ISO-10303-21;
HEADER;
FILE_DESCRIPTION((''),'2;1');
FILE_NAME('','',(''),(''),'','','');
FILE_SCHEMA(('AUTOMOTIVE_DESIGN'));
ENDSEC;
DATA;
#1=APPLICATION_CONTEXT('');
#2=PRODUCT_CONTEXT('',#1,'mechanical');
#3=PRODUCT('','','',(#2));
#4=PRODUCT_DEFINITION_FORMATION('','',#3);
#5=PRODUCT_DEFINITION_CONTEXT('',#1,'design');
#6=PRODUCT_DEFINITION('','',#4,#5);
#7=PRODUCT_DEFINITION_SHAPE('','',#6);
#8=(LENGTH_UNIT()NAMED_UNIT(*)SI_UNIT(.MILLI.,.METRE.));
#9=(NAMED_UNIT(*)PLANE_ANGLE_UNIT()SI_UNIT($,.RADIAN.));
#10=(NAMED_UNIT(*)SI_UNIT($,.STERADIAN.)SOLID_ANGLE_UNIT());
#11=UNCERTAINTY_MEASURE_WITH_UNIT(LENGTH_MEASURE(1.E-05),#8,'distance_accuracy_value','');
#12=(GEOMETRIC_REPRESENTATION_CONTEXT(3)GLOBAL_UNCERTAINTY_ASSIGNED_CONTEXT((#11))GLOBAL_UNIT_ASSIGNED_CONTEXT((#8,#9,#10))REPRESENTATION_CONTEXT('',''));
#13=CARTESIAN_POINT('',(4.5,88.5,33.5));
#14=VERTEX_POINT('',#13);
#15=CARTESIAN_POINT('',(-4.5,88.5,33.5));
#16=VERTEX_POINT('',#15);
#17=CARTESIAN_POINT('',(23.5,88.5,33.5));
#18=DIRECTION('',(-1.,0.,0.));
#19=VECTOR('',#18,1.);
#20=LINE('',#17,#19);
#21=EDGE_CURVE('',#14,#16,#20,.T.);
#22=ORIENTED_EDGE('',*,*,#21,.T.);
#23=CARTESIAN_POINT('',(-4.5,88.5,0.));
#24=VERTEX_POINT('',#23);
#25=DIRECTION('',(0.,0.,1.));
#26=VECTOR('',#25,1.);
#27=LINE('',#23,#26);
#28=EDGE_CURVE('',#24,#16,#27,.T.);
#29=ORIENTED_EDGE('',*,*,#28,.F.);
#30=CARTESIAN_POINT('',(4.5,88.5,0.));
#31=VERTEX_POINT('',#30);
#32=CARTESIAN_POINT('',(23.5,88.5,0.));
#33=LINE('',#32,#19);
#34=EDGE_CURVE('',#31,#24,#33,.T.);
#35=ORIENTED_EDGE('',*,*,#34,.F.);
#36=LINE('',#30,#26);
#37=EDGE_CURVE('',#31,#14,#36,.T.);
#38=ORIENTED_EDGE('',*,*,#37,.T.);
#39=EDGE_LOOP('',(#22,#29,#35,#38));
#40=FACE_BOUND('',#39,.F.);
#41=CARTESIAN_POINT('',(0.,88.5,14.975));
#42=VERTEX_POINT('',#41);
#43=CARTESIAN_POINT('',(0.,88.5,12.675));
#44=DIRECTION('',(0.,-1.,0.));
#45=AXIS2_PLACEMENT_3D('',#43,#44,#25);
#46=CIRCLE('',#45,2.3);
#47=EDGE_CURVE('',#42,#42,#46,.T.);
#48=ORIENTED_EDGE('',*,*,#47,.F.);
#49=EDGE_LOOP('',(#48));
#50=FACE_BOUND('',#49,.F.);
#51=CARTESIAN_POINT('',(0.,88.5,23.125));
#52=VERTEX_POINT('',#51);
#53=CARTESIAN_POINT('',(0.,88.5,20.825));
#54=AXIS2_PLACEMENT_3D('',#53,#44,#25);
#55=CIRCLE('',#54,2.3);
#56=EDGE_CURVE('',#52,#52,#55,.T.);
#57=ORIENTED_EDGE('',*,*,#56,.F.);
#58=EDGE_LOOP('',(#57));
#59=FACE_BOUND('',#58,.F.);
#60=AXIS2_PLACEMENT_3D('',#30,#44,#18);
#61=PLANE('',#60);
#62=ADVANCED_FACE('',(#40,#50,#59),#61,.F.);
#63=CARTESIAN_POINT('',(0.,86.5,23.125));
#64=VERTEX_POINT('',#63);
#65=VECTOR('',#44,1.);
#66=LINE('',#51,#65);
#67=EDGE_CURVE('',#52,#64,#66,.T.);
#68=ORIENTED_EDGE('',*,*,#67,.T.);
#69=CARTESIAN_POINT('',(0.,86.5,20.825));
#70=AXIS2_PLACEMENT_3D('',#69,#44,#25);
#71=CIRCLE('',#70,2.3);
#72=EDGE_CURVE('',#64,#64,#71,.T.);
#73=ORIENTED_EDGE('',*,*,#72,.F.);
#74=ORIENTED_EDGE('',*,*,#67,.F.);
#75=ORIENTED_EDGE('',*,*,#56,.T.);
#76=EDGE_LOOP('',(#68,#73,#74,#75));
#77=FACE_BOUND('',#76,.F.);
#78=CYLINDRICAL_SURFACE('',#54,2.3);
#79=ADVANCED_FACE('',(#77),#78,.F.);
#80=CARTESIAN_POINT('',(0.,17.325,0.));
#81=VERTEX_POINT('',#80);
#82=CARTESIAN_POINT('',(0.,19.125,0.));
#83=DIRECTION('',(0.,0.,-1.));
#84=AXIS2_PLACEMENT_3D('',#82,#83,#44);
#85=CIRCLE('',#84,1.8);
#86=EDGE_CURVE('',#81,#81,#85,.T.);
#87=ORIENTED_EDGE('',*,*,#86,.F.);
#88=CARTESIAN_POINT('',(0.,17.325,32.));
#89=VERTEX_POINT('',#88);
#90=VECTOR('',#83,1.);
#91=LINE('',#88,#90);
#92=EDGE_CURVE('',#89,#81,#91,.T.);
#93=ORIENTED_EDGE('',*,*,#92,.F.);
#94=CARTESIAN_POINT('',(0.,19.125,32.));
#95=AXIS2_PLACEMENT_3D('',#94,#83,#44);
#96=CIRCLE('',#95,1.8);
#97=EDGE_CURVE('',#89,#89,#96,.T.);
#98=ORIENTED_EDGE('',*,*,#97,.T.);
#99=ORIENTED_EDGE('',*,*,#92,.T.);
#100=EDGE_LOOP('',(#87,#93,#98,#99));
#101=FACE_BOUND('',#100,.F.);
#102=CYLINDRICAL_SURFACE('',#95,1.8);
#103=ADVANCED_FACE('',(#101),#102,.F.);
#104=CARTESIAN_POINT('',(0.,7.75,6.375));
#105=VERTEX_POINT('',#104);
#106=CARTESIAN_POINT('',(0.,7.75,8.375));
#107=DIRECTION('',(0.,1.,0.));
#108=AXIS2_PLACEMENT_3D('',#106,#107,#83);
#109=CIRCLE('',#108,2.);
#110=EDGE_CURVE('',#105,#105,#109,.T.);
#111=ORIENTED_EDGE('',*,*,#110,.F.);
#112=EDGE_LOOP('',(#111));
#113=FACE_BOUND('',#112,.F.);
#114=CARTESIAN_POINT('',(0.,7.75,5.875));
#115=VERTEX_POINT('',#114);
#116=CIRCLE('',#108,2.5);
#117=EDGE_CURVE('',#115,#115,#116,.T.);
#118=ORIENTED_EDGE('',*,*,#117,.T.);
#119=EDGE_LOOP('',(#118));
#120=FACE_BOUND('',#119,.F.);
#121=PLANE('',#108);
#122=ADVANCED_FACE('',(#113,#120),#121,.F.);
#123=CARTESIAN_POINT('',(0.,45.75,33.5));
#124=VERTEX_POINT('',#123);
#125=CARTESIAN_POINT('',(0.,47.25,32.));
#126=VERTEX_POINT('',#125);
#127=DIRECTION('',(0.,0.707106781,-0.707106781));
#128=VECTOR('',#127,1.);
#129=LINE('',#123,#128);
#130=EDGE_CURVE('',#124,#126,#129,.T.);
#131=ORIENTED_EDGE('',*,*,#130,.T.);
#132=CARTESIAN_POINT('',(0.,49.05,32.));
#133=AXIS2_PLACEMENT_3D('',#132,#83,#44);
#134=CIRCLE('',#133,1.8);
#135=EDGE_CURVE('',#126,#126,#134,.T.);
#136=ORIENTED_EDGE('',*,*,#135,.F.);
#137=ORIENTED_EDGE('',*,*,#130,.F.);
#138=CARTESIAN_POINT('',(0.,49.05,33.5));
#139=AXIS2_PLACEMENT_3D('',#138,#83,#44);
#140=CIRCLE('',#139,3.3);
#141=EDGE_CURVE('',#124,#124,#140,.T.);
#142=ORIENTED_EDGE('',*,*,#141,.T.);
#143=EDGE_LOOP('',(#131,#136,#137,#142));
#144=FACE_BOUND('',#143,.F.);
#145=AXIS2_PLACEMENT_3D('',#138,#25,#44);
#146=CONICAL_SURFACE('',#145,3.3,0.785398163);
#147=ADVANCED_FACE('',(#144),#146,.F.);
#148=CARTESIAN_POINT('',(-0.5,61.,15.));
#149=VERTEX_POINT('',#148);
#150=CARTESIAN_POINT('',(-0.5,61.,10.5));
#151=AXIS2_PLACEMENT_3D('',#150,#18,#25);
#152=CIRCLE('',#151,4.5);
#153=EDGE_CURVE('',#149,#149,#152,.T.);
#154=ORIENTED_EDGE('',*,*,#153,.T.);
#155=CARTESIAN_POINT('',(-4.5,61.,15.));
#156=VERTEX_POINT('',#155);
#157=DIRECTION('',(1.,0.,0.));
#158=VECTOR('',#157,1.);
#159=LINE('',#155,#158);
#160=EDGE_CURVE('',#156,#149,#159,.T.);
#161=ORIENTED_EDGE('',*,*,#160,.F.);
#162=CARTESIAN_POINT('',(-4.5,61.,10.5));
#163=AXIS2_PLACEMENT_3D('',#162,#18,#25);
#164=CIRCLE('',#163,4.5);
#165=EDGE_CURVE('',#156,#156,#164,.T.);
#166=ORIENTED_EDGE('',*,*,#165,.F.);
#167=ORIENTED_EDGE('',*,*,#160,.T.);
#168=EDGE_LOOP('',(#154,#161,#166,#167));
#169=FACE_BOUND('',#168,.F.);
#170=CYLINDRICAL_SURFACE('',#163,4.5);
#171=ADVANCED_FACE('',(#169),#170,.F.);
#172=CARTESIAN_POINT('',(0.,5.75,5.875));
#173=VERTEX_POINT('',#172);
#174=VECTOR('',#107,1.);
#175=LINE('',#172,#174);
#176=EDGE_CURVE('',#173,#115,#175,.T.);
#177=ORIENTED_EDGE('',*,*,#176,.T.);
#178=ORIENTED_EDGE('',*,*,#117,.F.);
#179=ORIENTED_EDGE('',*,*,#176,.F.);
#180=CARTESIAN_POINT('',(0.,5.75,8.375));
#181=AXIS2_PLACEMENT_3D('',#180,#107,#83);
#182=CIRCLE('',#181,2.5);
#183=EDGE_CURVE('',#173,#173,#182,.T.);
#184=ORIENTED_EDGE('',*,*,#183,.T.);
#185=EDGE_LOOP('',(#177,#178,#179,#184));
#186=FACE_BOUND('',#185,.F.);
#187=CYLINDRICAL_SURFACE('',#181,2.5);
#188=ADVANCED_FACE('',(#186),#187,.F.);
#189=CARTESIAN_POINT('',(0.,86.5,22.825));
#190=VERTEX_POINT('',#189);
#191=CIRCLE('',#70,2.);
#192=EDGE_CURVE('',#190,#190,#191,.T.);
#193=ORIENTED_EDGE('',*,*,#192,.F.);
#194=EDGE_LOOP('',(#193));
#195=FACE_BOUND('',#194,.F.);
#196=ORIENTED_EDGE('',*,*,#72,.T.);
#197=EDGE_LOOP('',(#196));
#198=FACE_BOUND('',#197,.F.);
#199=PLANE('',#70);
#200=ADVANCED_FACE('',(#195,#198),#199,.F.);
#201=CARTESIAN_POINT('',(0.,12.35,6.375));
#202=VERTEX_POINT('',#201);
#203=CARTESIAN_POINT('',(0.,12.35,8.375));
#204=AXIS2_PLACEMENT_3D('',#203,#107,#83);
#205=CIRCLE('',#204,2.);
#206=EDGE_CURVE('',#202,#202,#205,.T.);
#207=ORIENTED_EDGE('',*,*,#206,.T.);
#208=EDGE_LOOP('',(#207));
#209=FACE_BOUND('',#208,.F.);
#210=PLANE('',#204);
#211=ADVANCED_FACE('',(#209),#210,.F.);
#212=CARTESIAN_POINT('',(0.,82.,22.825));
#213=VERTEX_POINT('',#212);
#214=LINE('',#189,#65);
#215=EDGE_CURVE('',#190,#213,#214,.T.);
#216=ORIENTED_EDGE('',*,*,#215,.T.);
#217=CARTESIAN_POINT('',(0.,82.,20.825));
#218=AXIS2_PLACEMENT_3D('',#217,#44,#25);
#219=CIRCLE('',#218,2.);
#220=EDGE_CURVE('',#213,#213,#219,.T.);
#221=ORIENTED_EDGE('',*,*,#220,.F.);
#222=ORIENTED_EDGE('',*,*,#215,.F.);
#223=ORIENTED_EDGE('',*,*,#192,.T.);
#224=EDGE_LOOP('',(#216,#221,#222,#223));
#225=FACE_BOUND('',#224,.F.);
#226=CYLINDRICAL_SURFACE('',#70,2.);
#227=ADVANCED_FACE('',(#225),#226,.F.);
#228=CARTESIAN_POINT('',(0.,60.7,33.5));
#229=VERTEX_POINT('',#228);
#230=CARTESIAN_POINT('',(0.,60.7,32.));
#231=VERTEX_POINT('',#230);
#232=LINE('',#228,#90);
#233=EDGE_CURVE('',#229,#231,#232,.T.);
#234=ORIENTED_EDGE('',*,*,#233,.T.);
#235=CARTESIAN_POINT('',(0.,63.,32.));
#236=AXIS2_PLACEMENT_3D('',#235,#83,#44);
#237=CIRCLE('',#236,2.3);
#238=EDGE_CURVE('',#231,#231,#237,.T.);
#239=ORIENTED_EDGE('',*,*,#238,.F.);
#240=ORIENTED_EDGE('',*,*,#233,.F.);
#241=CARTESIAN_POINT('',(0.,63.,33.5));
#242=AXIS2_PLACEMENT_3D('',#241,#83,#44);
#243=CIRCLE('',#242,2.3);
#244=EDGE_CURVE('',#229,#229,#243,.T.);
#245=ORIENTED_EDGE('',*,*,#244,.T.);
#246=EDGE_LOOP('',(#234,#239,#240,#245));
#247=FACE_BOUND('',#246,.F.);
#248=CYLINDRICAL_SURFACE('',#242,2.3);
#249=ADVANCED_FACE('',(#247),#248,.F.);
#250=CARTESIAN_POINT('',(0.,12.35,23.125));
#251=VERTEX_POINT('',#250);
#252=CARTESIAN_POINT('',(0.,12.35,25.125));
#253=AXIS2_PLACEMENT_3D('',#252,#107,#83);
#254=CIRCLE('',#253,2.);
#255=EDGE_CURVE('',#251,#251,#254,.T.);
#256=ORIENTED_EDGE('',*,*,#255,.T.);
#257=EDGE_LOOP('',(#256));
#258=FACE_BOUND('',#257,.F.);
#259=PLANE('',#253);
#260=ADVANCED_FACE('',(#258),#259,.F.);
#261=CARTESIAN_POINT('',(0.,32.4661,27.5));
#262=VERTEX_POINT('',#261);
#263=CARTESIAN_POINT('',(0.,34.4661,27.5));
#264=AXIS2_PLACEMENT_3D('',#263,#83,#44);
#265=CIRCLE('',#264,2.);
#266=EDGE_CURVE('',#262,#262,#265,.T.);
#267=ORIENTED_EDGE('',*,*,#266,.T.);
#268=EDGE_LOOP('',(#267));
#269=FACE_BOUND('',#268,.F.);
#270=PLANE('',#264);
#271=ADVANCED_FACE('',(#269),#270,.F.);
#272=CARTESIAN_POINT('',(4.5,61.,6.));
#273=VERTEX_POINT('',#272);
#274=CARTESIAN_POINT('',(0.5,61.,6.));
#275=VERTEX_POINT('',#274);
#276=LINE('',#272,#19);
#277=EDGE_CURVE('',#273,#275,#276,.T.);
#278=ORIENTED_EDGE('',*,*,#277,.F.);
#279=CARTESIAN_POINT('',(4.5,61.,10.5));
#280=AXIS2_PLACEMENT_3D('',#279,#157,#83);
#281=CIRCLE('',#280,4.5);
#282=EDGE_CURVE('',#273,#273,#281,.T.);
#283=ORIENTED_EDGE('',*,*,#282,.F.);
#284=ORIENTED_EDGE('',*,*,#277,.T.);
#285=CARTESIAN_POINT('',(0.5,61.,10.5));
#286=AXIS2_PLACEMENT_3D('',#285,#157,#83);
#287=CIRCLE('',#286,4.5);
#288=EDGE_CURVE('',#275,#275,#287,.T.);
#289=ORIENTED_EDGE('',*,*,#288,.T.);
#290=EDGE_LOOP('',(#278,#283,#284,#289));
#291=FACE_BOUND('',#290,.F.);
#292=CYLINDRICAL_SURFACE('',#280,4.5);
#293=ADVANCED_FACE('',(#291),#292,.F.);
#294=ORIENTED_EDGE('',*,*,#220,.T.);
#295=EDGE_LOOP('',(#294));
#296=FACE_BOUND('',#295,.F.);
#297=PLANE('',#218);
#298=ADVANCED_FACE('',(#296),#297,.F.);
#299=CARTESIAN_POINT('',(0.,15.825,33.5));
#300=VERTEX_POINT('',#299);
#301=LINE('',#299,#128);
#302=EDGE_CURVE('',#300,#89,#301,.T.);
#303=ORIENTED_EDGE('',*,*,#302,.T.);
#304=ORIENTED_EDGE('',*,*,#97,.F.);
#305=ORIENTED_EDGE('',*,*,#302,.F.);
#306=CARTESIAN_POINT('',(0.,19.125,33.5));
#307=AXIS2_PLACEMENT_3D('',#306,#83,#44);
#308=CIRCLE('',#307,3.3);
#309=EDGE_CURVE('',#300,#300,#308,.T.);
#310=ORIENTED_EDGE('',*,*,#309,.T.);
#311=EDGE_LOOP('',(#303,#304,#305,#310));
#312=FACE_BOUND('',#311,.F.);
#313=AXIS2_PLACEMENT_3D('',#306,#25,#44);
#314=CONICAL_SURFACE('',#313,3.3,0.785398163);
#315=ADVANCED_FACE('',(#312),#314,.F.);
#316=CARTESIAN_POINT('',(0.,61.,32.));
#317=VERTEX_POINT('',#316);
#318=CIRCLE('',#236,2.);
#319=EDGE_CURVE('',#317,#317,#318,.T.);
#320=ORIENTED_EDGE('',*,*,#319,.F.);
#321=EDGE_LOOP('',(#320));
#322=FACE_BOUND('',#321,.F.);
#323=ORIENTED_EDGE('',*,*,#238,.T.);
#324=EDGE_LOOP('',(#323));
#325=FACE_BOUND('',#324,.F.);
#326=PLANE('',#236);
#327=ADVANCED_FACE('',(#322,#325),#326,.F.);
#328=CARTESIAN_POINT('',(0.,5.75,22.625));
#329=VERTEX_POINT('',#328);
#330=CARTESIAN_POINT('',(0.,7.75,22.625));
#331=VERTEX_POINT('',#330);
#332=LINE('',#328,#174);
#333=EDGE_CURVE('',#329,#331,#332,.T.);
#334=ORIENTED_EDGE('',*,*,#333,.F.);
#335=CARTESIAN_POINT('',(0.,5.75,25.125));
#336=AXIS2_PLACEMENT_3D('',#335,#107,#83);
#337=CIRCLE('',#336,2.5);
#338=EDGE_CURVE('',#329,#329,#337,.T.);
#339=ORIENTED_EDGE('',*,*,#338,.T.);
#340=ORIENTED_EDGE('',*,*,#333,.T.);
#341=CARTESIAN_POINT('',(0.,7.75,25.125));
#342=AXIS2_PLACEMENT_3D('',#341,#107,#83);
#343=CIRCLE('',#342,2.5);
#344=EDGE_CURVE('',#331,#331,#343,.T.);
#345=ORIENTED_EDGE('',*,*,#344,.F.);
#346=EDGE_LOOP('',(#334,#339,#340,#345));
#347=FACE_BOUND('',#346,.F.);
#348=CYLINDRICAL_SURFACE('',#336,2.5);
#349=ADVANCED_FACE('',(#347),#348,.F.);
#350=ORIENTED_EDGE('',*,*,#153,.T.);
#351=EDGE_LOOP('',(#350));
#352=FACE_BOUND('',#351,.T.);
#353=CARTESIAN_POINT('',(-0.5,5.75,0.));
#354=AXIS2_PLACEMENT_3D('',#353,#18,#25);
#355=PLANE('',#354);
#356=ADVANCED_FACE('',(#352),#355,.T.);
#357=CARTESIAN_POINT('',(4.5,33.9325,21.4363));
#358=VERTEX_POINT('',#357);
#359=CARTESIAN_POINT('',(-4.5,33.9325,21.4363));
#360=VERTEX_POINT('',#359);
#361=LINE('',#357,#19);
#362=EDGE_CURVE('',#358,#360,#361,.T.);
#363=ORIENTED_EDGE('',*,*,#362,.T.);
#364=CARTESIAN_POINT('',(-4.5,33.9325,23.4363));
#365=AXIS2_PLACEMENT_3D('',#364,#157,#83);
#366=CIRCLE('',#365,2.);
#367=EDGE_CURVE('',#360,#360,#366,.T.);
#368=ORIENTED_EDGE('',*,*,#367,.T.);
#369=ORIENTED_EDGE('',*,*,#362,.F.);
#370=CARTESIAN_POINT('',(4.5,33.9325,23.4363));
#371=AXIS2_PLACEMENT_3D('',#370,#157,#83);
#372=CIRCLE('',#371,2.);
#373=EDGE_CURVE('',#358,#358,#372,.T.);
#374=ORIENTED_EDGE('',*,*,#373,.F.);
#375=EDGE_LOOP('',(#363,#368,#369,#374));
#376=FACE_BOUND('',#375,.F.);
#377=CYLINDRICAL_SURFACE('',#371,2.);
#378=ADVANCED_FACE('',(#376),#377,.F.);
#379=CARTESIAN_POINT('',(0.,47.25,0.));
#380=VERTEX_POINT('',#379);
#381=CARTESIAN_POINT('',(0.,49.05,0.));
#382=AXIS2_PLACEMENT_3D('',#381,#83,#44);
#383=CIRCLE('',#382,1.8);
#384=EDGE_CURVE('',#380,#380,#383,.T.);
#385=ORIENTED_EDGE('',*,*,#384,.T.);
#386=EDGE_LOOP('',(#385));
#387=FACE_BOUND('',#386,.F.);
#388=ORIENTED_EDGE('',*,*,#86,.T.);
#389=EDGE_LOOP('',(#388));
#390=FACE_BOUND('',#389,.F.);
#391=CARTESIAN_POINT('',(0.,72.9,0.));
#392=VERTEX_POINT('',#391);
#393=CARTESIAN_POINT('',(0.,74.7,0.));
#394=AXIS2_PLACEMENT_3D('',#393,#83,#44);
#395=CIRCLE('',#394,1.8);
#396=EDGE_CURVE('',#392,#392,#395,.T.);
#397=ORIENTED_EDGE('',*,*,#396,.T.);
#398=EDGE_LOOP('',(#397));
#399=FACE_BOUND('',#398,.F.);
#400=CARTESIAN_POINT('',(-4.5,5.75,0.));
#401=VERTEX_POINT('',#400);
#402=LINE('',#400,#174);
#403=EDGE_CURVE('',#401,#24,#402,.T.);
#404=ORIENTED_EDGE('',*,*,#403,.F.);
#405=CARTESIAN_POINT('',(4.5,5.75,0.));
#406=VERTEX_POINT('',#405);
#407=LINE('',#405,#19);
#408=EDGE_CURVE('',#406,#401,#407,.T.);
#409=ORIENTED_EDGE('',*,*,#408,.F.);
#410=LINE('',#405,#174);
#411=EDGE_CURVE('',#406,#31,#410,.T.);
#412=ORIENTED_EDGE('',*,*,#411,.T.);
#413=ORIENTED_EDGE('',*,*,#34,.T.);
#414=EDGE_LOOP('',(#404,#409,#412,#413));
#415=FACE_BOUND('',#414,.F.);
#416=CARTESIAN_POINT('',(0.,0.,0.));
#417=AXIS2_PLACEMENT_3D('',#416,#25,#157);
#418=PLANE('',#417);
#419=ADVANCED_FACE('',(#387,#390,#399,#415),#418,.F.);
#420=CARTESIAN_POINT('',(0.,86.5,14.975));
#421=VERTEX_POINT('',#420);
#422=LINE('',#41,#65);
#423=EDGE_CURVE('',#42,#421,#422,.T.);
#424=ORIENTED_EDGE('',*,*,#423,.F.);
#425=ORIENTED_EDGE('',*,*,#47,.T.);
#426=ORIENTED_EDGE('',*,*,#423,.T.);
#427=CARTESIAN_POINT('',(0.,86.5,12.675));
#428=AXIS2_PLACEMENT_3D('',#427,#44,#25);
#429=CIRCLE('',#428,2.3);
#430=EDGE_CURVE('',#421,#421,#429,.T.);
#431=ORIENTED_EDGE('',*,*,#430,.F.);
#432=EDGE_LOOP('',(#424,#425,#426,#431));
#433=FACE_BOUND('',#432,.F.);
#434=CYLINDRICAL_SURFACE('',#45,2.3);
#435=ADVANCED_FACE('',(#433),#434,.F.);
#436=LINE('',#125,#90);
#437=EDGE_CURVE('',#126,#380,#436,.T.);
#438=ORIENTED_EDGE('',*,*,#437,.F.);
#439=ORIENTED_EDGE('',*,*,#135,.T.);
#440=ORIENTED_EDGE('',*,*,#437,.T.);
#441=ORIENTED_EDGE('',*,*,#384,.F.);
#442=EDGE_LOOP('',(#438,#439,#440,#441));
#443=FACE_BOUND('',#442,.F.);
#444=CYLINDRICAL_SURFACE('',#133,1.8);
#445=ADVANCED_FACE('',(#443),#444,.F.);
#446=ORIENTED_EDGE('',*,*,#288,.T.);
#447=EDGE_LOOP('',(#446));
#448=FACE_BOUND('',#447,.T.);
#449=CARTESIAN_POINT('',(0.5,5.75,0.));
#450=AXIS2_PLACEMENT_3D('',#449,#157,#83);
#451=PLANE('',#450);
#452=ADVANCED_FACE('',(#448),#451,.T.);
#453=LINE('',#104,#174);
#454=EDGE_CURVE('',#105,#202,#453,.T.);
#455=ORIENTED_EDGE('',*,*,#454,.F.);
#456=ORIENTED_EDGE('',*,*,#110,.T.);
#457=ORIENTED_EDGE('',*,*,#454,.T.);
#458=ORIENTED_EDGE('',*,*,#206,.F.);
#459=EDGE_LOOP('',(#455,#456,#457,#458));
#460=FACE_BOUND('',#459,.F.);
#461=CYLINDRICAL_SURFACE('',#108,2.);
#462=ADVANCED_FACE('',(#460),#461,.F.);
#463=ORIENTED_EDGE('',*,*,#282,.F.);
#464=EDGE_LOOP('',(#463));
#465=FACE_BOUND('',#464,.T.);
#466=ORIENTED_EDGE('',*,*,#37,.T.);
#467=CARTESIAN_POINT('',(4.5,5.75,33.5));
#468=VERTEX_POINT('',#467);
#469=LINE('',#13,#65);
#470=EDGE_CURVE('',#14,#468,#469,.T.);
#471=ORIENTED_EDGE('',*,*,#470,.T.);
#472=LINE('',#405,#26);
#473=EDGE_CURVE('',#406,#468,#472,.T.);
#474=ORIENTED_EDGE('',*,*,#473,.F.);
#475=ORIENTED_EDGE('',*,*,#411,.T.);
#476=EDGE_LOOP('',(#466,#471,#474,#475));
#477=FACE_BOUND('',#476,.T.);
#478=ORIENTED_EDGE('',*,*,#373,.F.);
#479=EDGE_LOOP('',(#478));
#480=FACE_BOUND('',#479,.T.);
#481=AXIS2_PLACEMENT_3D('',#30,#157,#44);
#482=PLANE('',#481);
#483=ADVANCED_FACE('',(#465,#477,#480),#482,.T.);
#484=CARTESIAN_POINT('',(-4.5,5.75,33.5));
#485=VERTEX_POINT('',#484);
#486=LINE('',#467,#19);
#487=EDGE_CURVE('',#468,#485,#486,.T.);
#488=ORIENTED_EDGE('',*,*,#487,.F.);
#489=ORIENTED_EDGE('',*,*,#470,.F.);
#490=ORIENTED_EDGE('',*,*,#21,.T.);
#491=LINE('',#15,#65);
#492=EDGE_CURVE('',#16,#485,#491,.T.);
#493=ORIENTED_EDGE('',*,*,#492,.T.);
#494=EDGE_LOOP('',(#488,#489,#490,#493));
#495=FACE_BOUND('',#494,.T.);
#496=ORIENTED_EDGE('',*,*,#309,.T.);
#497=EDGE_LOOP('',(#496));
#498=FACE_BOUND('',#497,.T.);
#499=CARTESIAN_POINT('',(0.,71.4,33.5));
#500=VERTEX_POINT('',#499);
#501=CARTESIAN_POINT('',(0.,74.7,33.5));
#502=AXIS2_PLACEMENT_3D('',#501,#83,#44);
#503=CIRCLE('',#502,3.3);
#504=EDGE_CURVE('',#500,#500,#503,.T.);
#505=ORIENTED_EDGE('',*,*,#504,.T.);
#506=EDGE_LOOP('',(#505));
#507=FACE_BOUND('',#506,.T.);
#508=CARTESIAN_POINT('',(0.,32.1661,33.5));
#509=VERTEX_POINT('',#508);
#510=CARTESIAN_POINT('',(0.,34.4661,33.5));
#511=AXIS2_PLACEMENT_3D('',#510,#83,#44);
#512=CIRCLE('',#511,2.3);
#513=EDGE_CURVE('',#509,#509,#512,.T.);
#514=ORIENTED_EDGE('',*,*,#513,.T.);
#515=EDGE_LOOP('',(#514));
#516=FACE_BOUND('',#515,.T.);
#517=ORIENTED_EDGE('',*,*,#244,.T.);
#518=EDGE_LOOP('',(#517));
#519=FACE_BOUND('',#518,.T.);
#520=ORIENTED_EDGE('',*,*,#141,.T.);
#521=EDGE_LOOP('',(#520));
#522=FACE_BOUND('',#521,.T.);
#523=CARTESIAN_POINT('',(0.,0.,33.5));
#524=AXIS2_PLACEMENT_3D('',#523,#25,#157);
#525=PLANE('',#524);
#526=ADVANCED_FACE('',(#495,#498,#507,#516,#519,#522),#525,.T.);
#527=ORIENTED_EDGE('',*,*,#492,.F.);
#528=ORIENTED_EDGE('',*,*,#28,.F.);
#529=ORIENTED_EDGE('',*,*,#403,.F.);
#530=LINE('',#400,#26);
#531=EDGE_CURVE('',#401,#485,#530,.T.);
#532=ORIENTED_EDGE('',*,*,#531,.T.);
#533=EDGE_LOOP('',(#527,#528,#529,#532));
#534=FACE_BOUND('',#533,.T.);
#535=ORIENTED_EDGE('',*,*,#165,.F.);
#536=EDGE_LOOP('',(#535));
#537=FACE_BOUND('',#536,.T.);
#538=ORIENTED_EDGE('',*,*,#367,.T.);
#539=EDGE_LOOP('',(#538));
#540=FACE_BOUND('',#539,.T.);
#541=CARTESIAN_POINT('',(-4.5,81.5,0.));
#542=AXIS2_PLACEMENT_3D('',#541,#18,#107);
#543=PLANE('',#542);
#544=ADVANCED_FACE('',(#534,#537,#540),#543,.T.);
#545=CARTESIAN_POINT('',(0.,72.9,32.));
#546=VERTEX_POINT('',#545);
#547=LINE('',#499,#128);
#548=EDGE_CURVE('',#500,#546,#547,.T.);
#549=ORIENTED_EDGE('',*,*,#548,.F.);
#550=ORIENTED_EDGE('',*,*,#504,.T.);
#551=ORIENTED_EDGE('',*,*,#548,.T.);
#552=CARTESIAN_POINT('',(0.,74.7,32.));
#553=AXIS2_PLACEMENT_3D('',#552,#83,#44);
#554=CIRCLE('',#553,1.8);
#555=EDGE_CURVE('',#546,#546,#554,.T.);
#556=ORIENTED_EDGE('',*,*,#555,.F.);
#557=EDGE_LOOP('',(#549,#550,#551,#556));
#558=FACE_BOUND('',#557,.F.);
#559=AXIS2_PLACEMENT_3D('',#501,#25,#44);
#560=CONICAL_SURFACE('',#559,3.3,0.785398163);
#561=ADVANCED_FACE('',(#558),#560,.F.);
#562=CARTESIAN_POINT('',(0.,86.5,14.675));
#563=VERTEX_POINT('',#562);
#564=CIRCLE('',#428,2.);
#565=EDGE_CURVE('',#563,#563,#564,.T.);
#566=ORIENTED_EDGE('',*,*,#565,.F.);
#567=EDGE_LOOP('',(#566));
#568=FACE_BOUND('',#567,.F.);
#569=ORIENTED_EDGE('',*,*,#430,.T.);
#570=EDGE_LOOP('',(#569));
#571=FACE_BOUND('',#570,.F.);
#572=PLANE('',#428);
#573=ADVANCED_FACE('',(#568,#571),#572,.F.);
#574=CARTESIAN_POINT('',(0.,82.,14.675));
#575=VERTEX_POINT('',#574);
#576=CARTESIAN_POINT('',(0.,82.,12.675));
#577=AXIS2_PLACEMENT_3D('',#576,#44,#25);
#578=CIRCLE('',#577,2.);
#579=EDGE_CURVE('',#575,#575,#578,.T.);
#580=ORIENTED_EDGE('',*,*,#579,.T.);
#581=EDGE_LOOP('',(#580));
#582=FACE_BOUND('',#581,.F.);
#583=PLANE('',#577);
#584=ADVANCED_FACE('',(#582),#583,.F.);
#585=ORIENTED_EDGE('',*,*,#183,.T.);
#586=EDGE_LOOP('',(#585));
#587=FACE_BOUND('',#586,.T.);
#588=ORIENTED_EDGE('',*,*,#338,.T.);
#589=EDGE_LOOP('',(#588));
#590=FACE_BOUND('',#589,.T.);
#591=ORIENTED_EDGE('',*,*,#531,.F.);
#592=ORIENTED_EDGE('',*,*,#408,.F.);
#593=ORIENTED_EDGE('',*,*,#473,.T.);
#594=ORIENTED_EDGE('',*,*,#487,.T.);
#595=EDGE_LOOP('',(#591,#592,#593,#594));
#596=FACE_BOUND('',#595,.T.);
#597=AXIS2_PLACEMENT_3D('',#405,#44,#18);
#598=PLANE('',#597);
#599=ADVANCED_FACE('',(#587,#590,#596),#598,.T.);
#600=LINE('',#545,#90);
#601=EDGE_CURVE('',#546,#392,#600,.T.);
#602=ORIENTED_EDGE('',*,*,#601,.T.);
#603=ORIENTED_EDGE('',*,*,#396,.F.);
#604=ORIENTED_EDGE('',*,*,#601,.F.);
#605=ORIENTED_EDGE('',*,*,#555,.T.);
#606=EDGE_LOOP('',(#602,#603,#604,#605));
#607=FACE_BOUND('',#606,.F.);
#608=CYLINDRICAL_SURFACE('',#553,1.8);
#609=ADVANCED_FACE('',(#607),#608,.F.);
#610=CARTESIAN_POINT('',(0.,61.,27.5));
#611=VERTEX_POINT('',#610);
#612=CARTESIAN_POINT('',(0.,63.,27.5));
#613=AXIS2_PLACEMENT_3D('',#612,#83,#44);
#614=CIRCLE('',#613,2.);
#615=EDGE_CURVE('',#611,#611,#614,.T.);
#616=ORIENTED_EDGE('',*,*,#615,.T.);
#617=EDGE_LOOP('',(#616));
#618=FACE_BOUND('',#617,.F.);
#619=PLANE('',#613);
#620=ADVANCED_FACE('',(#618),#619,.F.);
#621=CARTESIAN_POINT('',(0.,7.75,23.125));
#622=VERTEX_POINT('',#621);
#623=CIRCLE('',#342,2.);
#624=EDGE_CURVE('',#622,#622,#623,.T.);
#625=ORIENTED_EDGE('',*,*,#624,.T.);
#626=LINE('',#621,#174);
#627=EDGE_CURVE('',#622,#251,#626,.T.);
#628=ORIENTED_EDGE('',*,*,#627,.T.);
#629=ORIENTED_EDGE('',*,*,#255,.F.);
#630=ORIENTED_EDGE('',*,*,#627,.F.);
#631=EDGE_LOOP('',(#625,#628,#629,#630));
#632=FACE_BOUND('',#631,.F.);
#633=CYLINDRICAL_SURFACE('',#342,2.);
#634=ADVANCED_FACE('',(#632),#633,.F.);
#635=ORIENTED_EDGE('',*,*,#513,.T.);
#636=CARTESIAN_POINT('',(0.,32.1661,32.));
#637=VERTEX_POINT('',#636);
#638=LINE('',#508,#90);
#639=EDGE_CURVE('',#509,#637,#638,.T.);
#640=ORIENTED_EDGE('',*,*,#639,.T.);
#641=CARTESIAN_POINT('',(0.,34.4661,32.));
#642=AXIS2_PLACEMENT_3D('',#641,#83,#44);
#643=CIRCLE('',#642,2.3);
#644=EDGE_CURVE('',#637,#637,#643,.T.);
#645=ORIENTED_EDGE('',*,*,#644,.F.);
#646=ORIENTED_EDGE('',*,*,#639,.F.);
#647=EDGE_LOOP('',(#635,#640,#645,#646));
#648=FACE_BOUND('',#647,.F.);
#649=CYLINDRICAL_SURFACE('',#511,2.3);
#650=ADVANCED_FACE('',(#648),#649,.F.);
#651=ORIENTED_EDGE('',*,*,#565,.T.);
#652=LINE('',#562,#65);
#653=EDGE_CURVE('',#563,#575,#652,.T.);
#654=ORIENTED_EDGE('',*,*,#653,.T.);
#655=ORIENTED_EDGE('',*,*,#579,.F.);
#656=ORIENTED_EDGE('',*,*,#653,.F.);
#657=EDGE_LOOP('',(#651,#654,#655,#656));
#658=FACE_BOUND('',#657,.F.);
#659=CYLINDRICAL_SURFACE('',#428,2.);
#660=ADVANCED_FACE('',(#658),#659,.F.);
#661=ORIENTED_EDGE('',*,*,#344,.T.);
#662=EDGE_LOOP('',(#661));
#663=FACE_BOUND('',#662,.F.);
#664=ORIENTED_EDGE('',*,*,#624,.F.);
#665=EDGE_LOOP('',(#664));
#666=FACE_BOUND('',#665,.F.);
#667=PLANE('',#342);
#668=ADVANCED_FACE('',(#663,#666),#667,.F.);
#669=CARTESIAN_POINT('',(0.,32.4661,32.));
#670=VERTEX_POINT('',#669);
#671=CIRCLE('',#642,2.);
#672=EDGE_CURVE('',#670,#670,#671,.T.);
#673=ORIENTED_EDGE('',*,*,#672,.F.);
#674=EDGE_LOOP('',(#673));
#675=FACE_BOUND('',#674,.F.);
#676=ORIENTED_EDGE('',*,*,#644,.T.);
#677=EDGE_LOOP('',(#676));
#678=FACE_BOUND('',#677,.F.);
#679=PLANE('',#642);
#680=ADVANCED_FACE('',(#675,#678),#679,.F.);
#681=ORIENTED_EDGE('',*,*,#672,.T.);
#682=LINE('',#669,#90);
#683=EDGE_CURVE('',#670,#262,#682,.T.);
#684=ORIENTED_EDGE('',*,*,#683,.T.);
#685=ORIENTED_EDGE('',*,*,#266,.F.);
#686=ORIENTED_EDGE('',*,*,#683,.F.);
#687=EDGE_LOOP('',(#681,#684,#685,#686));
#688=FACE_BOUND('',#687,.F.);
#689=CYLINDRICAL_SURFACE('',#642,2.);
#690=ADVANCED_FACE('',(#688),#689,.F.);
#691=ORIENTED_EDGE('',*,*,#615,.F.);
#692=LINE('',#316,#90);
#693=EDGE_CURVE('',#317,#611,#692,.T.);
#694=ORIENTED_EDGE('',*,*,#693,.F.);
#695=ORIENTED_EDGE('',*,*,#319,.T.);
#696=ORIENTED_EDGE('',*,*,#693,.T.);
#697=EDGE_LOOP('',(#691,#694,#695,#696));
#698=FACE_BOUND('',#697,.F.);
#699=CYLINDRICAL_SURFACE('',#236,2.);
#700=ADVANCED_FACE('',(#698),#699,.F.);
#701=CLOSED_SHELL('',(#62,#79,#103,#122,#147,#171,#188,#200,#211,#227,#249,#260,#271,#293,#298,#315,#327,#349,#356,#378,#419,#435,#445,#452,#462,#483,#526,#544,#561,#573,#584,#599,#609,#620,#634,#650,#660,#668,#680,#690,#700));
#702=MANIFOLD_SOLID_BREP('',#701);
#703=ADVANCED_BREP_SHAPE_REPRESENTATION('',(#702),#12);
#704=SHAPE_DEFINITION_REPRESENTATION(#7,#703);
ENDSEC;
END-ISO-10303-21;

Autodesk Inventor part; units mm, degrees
ref_plane "YZ Plane" through (0, 0, 0) normal (1, 0, 0) x (0, 1, 0)
ref_plane "XZ Plane" through (0, 0, 0) normal (0, 1, 0) x (-1, 0, 0)
ref_plane "Work Plane1" through (0, 0, 0) normal (0, 0, 1) x (1, 0, 0)
ref_plane "Work Plane2" through (-89, -40.3889, 33.5) normal (0, 0, 1) x (1, 0, 0)
sketch "Sketch1" plane through (0, 0, 0) normal (0, 0, 1) x (1, 0, 0)
  line L0 (23.5, 88.5) -> (-23.5, 88.5) projected
  line L1 (-23.5, 88.5) -> (-23.5, 36.5) projected
  line L2 (-26.5, 33.5) -> (-89, 33.5) projected
  line L3 (-89, 33.5) -> (-89, -72.5) projected
  line L4 (-89, -72.5) -> (-77, -72.5) projected
  line L5 (-74, -75.5) -> (-74, -93.5) projected
  line L6 (-74, -93.5) -> (74, -93.5) projected
  line L7 (74, -93.5) -> (74, -75.5) projected
  line L8 (77, -72.5) -> (89, -72.5) projected
  line L9 (89, -72.5) -> (89, 33.5) projected
  line L10 (89, 33.5) -> (26.5, 33.5) projected
  line L11 (23.5, 36.5) -> (23.5, 88.5) projected
  line L12 (-4.5, 81.5) -> (-4.5, 36.5) projected
  line L13 (-7.5, 33.5) -> (-13.5, 33.5) projected
  line L14 (-16.5, 36.5) -> (-16.5, 81.5) projected
  line L15 (-13.5, 84.5) -> (-7.5, 84.5) projected
  line L16 (16.5, 81.5) -> (16.5, 36.5) projected
  line L17 (13.5, 33.5) -> (7.5, 33.5) projected
  line L18 (4.5, 36.5) -> (4.5, 81.5) projected
  line L19 (7.5, 84.5) -> (13.5, 84.5) projected
  line L20 (-4.5, 88.5) -> (4.5, 88.5)
  line L21 (4.5, 88.5) -> (4.5, 5.75)
  line L22 (4.5, 5.75) -> (-4.5, 5.75)
  line L23 (-4.5, 5.75) -> (-4.5, 88.5)
  line L24 (-32.2, 4.75) -> (-59.9, 4.75)
  arc A0 (13.5, 33.5) -> (16.5, 36.5) centre (13.5, 36.5) ccw projected
  arc A1 (4.5, 36.5) -> (7.5, 33.5) centre (7.5, 36.5) ccw projected
  arc A2 (7.5, 84.5) -> (4.5, 81.5) centre (7.5, 81.5) ccw projected
  arc A3 (16.5, 81.5) -> (13.5, 84.5) centre (13.5, 81.5) ccw projected
  arc A4 (-4.5, 81.5) -> (-7.5, 84.5) centre (-7.5, 81.5) ccw projected
  arc A5 (-7.5, 33.5) -> (-4.5, 36.5) centre (-7.5, 36.5) ccw projected
  arc A6 (-16.5, 36.5) -> (-13.5, 33.5) centre (-13.5, 36.5) ccw projected
  arc A7 (-13.5, 84.5) -> (-16.5, 81.5) centre (-13.5, 81.5) ccw projected
  arc A8 (-26.5, 33.5) -> (-23.5, 36.5) centre (-26.5, 36.5) ccw projected
  arc A9 (-74, -75.5) -> (-77, -72.5) centre (-77, -75.5) ccw projected
  arc A10 (77, -72.5) -> (74, -75.5) centre (77, -75.5) ccw projected
  arc A11 (23.5, 36.5) -> (26.5, 33.5) centre (26.5, 36.5) ccw projected
  circle A12 centre (39.125, 25.9125) radius 1.0065 projected
  circle A13 centre (72.95, 12.275) radius 1.0065 projected
  circle A14 centre (-39.125, 12.3375) radius 1.0065 projected
  circle A15 centre (-72.95, 25.975) radius 1.0065 projected
  circle A16 centre (-72.95, 12.275) radius 1.0065 projected
  circle A17 centre (-39.125, 25.9125) radius 1.0065 projected
  circle A18 centre (72.95, 25.975) radius 1.0065 projected
  circle A19 centre (39.125, 12.3375) radius 1.0065 projected
  circle A20 centre (-42.4984, -44.6666) radius 1.2295 projected
  circle A21 centre (-79, -42.3889) radius 1.2295 projected
  circle A22 centre (-19.5, 28.875) radius 1.2295 projected
  circle A23 centre (19.5, 9.55) radius 1.2295 projected
  circle A24 centre (19.5, 47.3) radius 1.2295 projected
  circle A25 centre (-19.5, 47.3) radius 1.2295 projected
  circle A26 centre (0, 74.7) radius 1.2295 projected
  circle A27 centre (-19.4231, 74.8077) radius 1.2295 projected
  circle A28 centre (19.5, 74.7) radius 1.2295 projected
  circle A29 centre (0, 49.05) radius 1.2295 projected
  circle A30 centre (19.5, 28.875) radius 1.2295 projected
  circle A31 centre (0, 19.125) radius 1.2295 projected
  circle A32 centre (-19.5, 9.55) radius 1.2295 projected
  circle A33 centre (42.5, -44.6649) radius 1.2295 projected
  circle A34 centre (79, -42.3889) radius 1.2295 projected
  circle A35 centre (21.5, -85.5) radius 1.8 projected
  circle A36 centre (-64.5, -85.5) radius 1.8 projected
  circle A37 centre (-21.5, -85.5) radius 1.8 projected
  circle A38 centre (64.5, -85.5) radius 1.8 projected
  line L25 (-58.2315, -77.6013) -> (-80.7685, -61.1541) projected
  line L26 (-82, -58.7308) -> (-82, -48.3889) projected
  line L27 (-75.8885, -45.3972) -> (-47.1423, -47.5438) projected
  line L28 (-21.1, -26.5751) -> (-21.1, -22.0813) projected
  line L29 (-46.9357, -41.5592) -> (-76, -39.3889) projected
  line L30 (-82, -36.3889) -> (-82, 1.75) projected
  line L31 (32.9914, 4.75) -> (79, 4.75) projected
  line L32 (82, -48.3889) -> (82, -58.7308) projected
  line L33 (76, -39.3889) -> (46.9371, -41.5577) projected
  line L34 (21.1, -22.0813) -> (21.1, -26.5749) projected
  line L35 (47.144, -47.5423) -> (76, -45.3889) projected
  line L36 (82, 1.75) -> (82, -36.3889) projected
  line L37 (80.7685, -61.1541) -> (58.2315, -77.6013) projected
  line L38 (57, -80.0246) -> (57, -87.5) projected
  arc A39 (55, -89.5) -> (57, -87.5) centre (55, -87.5) ccw projected
  line L39 (55, -89.5) -> (31, -89.5) projected
  arc A40 (29, -87.5) -> (31, -89.5) centre (31, -87.5) ccw projected
  line L40 (29, -87.5) -> (29, -79.2522) projected
  line L41 (14, -79.5039) -> (14, -87.5) projected
  arc A41 (12, -89.5) -> (14, -87.5) centre (12, -87.5) ccw projected
  line L42 (12, -89.5) -> (-12, -89.5) projected
  arc A42 (-14, -87.5) -> (-12, -89.5) centre (-12, -87.5) ccw projected
  line L43 (-14, -87.5) -> (-14, -79.5039) projected
  line L44 (-29, -79.2522) -> (-29, -87.5) projected
  arc A43 (-31, -89.5) -> (-29, -87.5) centre (-31, -87.5) ccw projected
  line L45 (-31, -89.5) -> (-55, -89.5) projected
  arc A44 (-57, -87.5) -> (-55, -89.5) centre (-55, -87.5) ccw projected
  line L46 (-57, -87.5) -> (-57, -80.0246) projected
  line L47 (-66.95, 28.9125) -> (-45.125, 28.9125) projected
  line L48 (-42.125, 25.9125) -> (-42.125, 12.275) projected
  line L49 (-45.125, 9.275) -> (-66.95, 9.275) projected
  line L50 (-69.95, 12.275) -> (-69.95, 25.9125) projected
  line L51 (-16.5, 12.75) -> (-16.5, 25.5) projected
  line L52 (-13.5, 28.5) -> (-7.5, 28.5) projected
  line L53 (-4.5, 25.5) -> (-4.5, 12.75) projected
  line L54 (-7.5, 9.75) -> (-13.5, 9.75) projected
  line L55 (66.95, 9.3375) -> (45.125, 9.3375) projected
  line L56 (42.125, 12.3375) -> (42.125, 25.975) projected
  line L57 (45.125, 28.975) -> (66.95, 28.975) projected
  line L58 (69.95, 25.975) -> (69.95, 12.3375) projected
  line L59 (4.5, 12.75) -> (4.5, 25.5) projected
  line L60 (7.5, 28.5) -> (13.5, 28.5) projected
  line L61 (16.5, 25.5) -> (16.5, 12.75) projected
  line L62 (13.5, 9.75) -> (7.5, 9.75) projected
  line L63 (44.5181, -40.6102) -> (28.0504, -22.9209) projected
  line L64 (27.268, -20.5154) -> (30.0132, 2.1113) projected
  line L65 (-44.7206, -49.1201) -> (-29.3549, -77.8368) projected
  line L66 (-79, 4.75) -> (-32.9914, 4.75) projected
  line L67 (-30.0132, 2.1113) -> (-27.268, -20.5155) projected
  line L68 (-28.0502, -22.9208) -> (-44.5164, -40.6115) projected
  line L69 (29.3549, -77.8368) -> (44.7222, -49.1185) projected
  line L70 (-14.6042, -77.6983) -> (-37.8537, -46.8489) projected
  line L71 (-37.4786, -42.8259) -> (-22.0793, -28.7924) projected
  line L72 (-21.1218, -21.72) -> (-23.9255, 1.3887) projected
  line L73 (-20.9474, 4.75) -> (20.9474, 4.75) projected
  line L74 (23.9255, 1.3887) -> (21.1218, -21.72) projected
  line L75 (22.0795, -28.7925) -> (37.4798, -42.8243) projected
  line L76 (37.8551, -46.8475) -> (14.6042, -77.6983) projected
  circle A45 centre (-78, -67.1725) radius 1.2295 projected
  arc A46 (79, -39.3889) -> (82, -36.3889) centre (79, -36.3889) ccw projected
  arc A47 (44.5181, -40.6102) -> (46.9371, -41.5577) centre (46.7138, -38.566) ccw projected
  arc A48 (27.268, -20.5154) -> (28.0504, -22.9209) centre (30.2461, -20.8767) ccw projected
  arc A49 (32.9914, 4.75) -> (30.0132, 2.1113) centre (32.9914, 1.75) ccw projected
  arc A50 (82, 1.75) -> (79, 4.75) centre (79, 1.75) ccw projected
  arc A51 (-42.125, 25.9125) -> (-45.125, 28.9125) centre (-45.125, 25.9125) ccw projected
  arc A52 (-45.125, 9.275) -> (-42.125, 12.275) centre (-45.125, 12.275) ccw projected
  arc A53 (-69.95, 12.275) -> (-66.95, 9.275) centre (-66.95, 12.275) ccw projected
  arc A54 (-66.95, 28.9125) -> (-69.95, 25.9125) centre (-66.95, 25.9125) ccw projected
  arc A55 (-13.5, 28.5) -> (-16.5, 25.5) centre (-13.5, 25.5) ccw projected
  arc A56 (-4.5, 25.5) -> (-7.5, 28.5) centre (-7.5, 25.5) ccw projected
  arc A57 (-7.5, 9.75) -> (-4.5, 12.75) centre (-7.5, 12.75) ccw projected
  arc A58 (-16.5, 12.75) -> (-13.5, 9.75) centre (-13.5, 12.75) ccw projected
  arc A59 (58.2315, -77.6013) -> (57, -80.0246) centre (60, -80.0246) ccw projected
  arc A60 (29.3549, -77.8368) -> (29, -79.2522) centre (32, -79.2522) ccw projected
  arc A61 (47.144, -47.5423) -> (44.7222, -49.1185) centre (47.3673, -50.5339) ccw projected
  arc A62 (82, -48.3889) -> (79, -45.3889) centre (79, -48.3889) ccw projected
  arc A63 (80.7685, -61.1541) -> (82, -58.7308) centre (79, -58.7308) ccw projected
  arc A64 (-21.1, -22.0813) -> (-21.1218, -21.72) centre (-24.1, -22.0813) ccw projected
  arc A65 (-20.9474, 4.75) -> (-23.9255, 1.3887) centre (-20.9474, 1.75) ccw projected
  arc A66 (23.9255, 1.3887) -> (20.9474, 4.75) centre (20.9474, 1.75) ccw projected
  arc A67 (21.1218, -21.72) -> (21.1, -22.0813) centre (24.1, -22.0813) ccw projected
  arc A68 (21.1, -26.5749) -> (22.0795, -28.7925) centre (24.1, -26.5749) ccw projected
  arc A69 (37.8551, -46.8475) -> (37.4798, -42.8243) centre (35.4593, -45.0419) ccw projected
  arc A70 (14.6042, -77.6983) -> (14, -79.5039) centre (17, -79.5039) ccw projected
  arc A71 (-14, -79.5039) -> (-14.6042, -77.6983) centre (-17, -79.5039) ccw projected
  arc A72 (-37.4786, -42.8259) -> (-37.8537, -46.8489) centre (-35.4579, -45.0433) ccw projected
  arc A73 (-22.0793, -28.7924) -> (-21.1, -26.5751) centre (-24.1, -26.5751) ccw projected
  arc A74 (-82, -36.3889) -> (-79, -39.3889) centre (-79, -36.3889) ccw projected
  arc A75 (-79, 4.75) -> (-82, 1.75) centre (-79, 1.75) ccw projected
  arc A76 (-30.0132, 2.1113) -> (-32.9914, 4.75) centre (-32.9914, 1.75) ccw projected
  arc A77 (-28.0502, -22.9208) -> (-27.268, -20.5155) centre (-30.2461, -20.8769) ccw projected
  arc A78 (-46.9357, -41.5592) -> (-44.5164, -40.6115) centre (-46.7123, -38.5676) ccw projected
  arc A79 (7.5, 28.5) -> (4.5, 25.5) centre (7.5, 25.5) ccw projected
  arc A80 (16.5, 25.5) -> (13.5, 28.5) centre (13.5, 25.5) ccw projected
  arc A81 (13.5, 9.75) -> (16.5, 12.75) centre (13.5, 12.75) ccw projected
  arc A82 (4.5, 12.75) -> (7.5, 9.75) centre (7.5, 12.75) ccw projected
  arc A83 (-57, -80.0246) -> (-58.2315, -77.6013) centre (-60, -80.0246) ccw projected
  arc A84 (-82, -58.7308) -> (-80.7685, -61.1541) centre (-79, -58.7308) ccw projected
  arc A85 (-75.8885, -45.3972) -> (-76.1119, -45.3889) centre (-76.1119, -48.3889) ccw projected
  arc A86 (-44.7206, -49.1201) -> (-47.1423, -47.5438) centre (-47.3657, -50.5355) ccw projected
  arc A87 (-29, -79.2522) -> (-29.3549, -77.8368) centre (-32, -79.2522) ccw projected
  arc A88 (42.125, 12.3375) -> (45.125, 9.3375) centre (45.125, 12.3375) ccw projected
  arc A89 (45.125, 28.975) -> (42.125, 25.975) centre (45.125, 25.975) ccw projected
  arc A90 (69.95, 25.975) -> (66.95, 28.975) centre (66.95, 25.975) ccw projected
  arc A91 (66.95, 9.3375) -> (69.95, 12.3375) centre (66.95, 12.3375) ccw projected
  circle A92 centre (78, -67.1725) radius 1.2295 projected
  line L77 (-22.5, 25.9125) -> (-22.5, 12.55) projected
  arc A93 (-25.5, 9.55) -> (-22.5, 12.55) centre (-25.5, 12.55) ccw projected
  line L78 (-25.5, 9.55) -> (-33.125, 9.55) projected
  arc A94 (-36.125, 12.55) -> (-33.125, 9.55) centre (-33.125, 12.55) ccw projected
  line L79 (-36.125, 12.55) -> (-36.125, 25.9125) projected
  arc A95 (-33.125, 28.9125) -> (-36.125, 25.9125) centre (-33.125, 25.9125) ccw projected
  line L80 (-33.125, 28.9125) -> (-25.5, 28.9125) projected
  arc A96 (-22.5, 25.9125) -> (-25.5, 28.9125) centre (-25.5, 25.9125) ccw projected
  line L81 (76, -45.3889) -> (79, -45.3889) projected
  line L82 (79, -39.3889) -> (76, -39.3889) projected
  line L83 (33.125, 9.275) -> (25.5, 9.275) projected
  arc A97 (22.5, 12.275) -> (25.5, 9.275) centre (25.5, 12.275) ccw projected
  line L84 (22.5, 12.275) -> (22.5, 25.9125) projected
  arc A98 (25.5, 28.9125) -> (22.5, 25.9125) centre (25.5, 25.9125) ccw projected
  line L85 (25.5, 28.9125) -> (33.125, 28.9125) projected
  arc A99 (36.125, 25.9125) -> (33.125, 28.9125) centre (33.125, 25.9125) ccw projected
  line L86 (36.125, 25.9125) -> (36.125, 12.275) projected
  arc A100 (33.125, 9.275) -> (36.125, 12.275) centre (33.125, 12.275) ccw projected
  line L87 (-83, 28.975) -> (-78.95, 28.975) projected
  arc A101 (-75.95, 25.975) -> (-78.95, 28.975) centre (-78.95, 25.975) ccw projected
  line L88 (-75.95, 25.975) -> (-75.95, 12.275) projected
  arc A102 (-78.95, 9.275) -> (-75.95, 12.275) centre (-78.95, 12.275) ccw projected
  line L89 (-78.95, 9.275) -> (-83, 9.275) projected
  arc A103 (-86, 12.275) -> (-83, 9.275) centre (-83, 12.275) ccw projected
  line L90 (-86, 12.275) -> (-86, 25.975) projected
  arc A104 (-83, 28.975) -> (-86, 25.975) centre (-83, 25.975) ccw projected
  arc A105 (-79, -45.3889) -> (-82, -48.3889) centre (-79, -48.3889) ccw projected
  line L91 (-79, -45.3889) -> (-76.1119, -45.3889) projected
  line L92 (-76, -39.3889) -> (-79, -39.3889) projected
  line L93 (78.95, 28.975) -> (83, 28.975) projected
  arc A106 (86, 25.975) -> (83, 28.975) centre (83, 25.975) ccw projected
  line L94 (86, 25.975) -> (86, 12.275) projected
  arc A107 (83, 9.275) -> (86, 12.275) centre (83, 12.275) ccw projected
  line L95 (83, 9.275) -> (78.95, 9.275) projected
  arc A108 (75.95, 12.275) -> (78.95, 9.275) centre (78.95, 12.275) ccw projected
  line L96 (75.95, 12.275) -> (75.95, 25.975) projected
  arc A109 (78.95, 28.975) -> (75.95, 25.975) centre (78.95, 25.975) ccw projected
  circle A110 centre (-24.1, -73.1) radius 1.2295 projected
  circle A111 centre (24.1, -24.9) radius 1.2295 projected
  circle A112 centre (-24.1, -24.9) radius 1.2295 projected
  circle A113 centre (24.1, -73.1) radius 1.2295 projected
  point P0 (0, 0)
  point P1 (-4.5, 81.5)
  point P2 (-4.5, 36.5)
  point P3 (7.5, 81.5)
  point P4 (13.5, 81.5)
  point P5 (-7.5, 81.5)
  point P6 (-13.5, 81.5)
  point P7 (-77, -75.5)
  point P8 (39, -44.2094)
  point P9 (-4.5, 28.5)
  point P10 (-4.5, 9.75)
  point P11 (4.5, 9.75)
  point P12 (4.5, 28.5)
  point P13 (-79, -67.8878)
  point P14 (-79, -66.4572)
  dimension "d41" = 1
extrude "Extrusion1" add sketch "Sketch1" along normal up to surface (33.5 mm away) contours L21 L18 L22 L23 L12 L0 | A26 | A29 | A31
sketch "Sketch2" plane through (4.5, 5.75, 0) normal (1, 0, 0) x (0, 0, -1)
  circle A0 centre (-23.4363, 28.1825) radius 2 projected
  point P0 (0, -5.75)
extrude "Extrusion2" cut sketch "Sketch2" against normal blind 10
sketch "Sketch3" plane through (4.5, 5.75, 0) normal (1, 0, 0) x (0, 0, -1)
  circle A0 centre (-10.5, 55.25) radius 4.5 projected
  point P0 (0, -5.75)
extrude "Extrusion3" cut sketch "Sketch3" against normal blind 4
sketch "Sketch4" plane through (-4.5, 5.75, 0) normal (-1, 0, 0) x (0, 0, 1)
  circle A0 centre (10.5, 55.25) radius 4.5 projected
  point P0 (0, -5.75)
extrude "Extrusion4" cut sketch "Sketch4" against normal blind 4
sketch "Sketch5" plane through (-4.5, 5.75, 33.5) normal (0, 0, 1) x (1, 0, 0)
  line L0 (5, 59.75) -> (5, 50.75) projected
  line L1 (4, 50.75) -> (4, 59.75) projected
  line L2 (9, 26.1825) -> (0, 26.1825) projected
  line L3 (9, 30.1825) -> (0, 30.1825) projected
  line L4 (17, 78.15) -> (-8, 78.15)
  line L5 (-8, 35.85) -> (17, 35.85)
  line L6 (9, 82.75) -> (9, 0) projected
  line L7 (0, 50.75) -> (0, 59.75) projected
  line L8 (9, 35.85) -> (0, 35.85)
  line L9 (0, 35.85) -> (0, 50.75)
  line L10 (0, 50.75) -> (9, 50.75)
  line L11 (9, 50.75) -> (9, 35.85)
  line L12 (0, 0) -> (0, 82.75) projected
  line L13 (9, 78.15) -> (0, 78.15)
  line L14 (0, 78.15) -> (0, 59.75)
  line L15 (0, 59.75) -> (9, 59.75)
  line L16 (9, 59.75) -> (9, 78.15)
  line L17 (-18, 6.625) -> (-18, 20.125) projected
  line L18 (-18, 13.375) -> (27, 13.375)
  line L19 (9, 35.85) -> (0, 50.75)
  line L20 (9, 59.75) -> (9, 50.75) projected
  line L21 (0, 35.85) -> (9, 50.75)
  line L22 (9, 59.75) -> (0, 78.15)
  line L23 (0, 59.75) -> (9, 78.15)
  point P0 (4.5, -5.75)
  point P1 (4.5, 13.375)
  point P2 (4.5, 43.3)
  point P3 (4.5, 68.95)
  dimension "d9" = 4.5
  dimension "d10" = 4.5
hole "Hole1" at (0, 19.125, 33.5) at (0, 49.05, 33.5) at (0, 74.7, 33.5) direction (0, 0, -1) diameter 3.6 end through all countersink diameter 6.6 countersink angle 90 clearance for "Countersunk Flat Head Screw ISO 2009/7046" size "M3" standard "ISO"
sketch "Sketch6" plane through (-4.5, 5.75, 0) normal (0, -1, 0) x (1, 0, 0)
  line L0 (9, 33.5) -> (0, 33.5) projected
  line L1 (0, 0) -> (0, 33.5) projected
  line L2 (0, 0) -> (9, 0) projected
  line L3 (9, 0) -> (9, 33.5) projected
  line L4 (0, 16.75) -> (9, 16.75)
  line L5 (9, 16.75) -> (0, 33.5)
  line L6 (9, 33.5) -> (0, 16.75)
  line L7 (0, 16.75) -> (9, 0)
  line L8 (9, 16.75) -> (0, 0)
  point P0 (4.5, 0)
  point P1 (4.5, 8.375)
  point P2 (4.5, 25.125)
hole "Hole2" at (0, 5.75, 8.375) at (0, 5.75, 25.125) direction (0, 1, 0) diameter 4 depth 6.6 counterbore diameter 5 counterbore depth 2
sketch "Sketch7" plane through (-4.5, 88.5, 0) normal (0, 1, 0) x (1, 0, 0)
  line L0 (0, -33.5) -> (9, -33.5) projected
  line L1 (0, -33.5) -> (9, -33.5) projected
  line L2 (9, 0) -> (9, -33.5) projected
  line L3 (9, 0) -> (0, 0) projected
  line L4 (0, 0) -> (0, -33.5) projected
  line L5 (-8, -1.4) -> (-8, -6.6) projected
  line L6 (-8, -32.1) -> (-8, -26.9) projected
  line L7 (17, -32.1) -> (17, -26.9) projected
  line L8 (17, -1.4) -> (17, -6.6) projected
  line L9 (17, -32.1) -> (-8, -32.1)
  line L10 (-8, -32.1) -> (-8, -26.9)
  line L11 (-8, -26.9) -> (17, -26.9)
  line L12 (17, -26.9) -> (17, -32.1)
  line L13 (-8, -6.6) -> (17, -6.6)
  line L14 (17, -6.6) -> (17, -1.4)
  line L15 (17, -1.4) -> (-8, -1.4)
  line L16 (-8, -1.4) -> (-8, -6.6)
  line L17 (17, -6.6) -> (-8, -6.6)
  line L18 (-8, -6.6) -> (-8, -8.6)
  line L19 (-8, -8.6) -> (17, -8.6)
  line L20 (17, -8.6) -> (17, -6.6)
  line L21 (-8, -26.9) -> (17, -26.9)
  line L22 (17, -26.9) -> (17, -24.9)
  line L23 (17, -24.9) -> (-8, -24.9)
  line L24 (-8, -24.9) -> (-8, -26.9)
  line L25 (9, 0) -> (9, -33.5) projected
  line L26 (9, -16.75) -> (0, -16.75)
  line L27 (0, 0) -> (0, -33.5) projected
  line L28 (9, -24.9) -> (0, -16.75)
  line L29 (9, -8.6) -> (0, -16.75)
  line L30 (0, -8.6) -> (9, -16.75)
  line L31 (9, -16.75) -> (0, -24.9)
  point P0 (4.5, 0)
  point P1 (4.5, -20.825)
  point P2 (4.5, -12.675)
  dimension "d25" = 2
  dimension "d26" = 2
hole "Hole3" at (0, 88.5, 20.825) at (0, 88.5, 12.675) direction (0, -1, 0) diameter 4 depth 6.5 counterbore diameter 4.6 counterbore depth 2
sketch "Sketch8" plane through (-4.5, 5.75, 33.5) normal (0, 0, 1) x (1, 0, 0)
  line L0 (26, 27.2497) -> (-17, 27.2497)
  line L1 (26, 31.2497) -> (-17, 31.2497)
  line L2 (4, 52.75) -> (-1, 52.75)
  line L3 (4, 61.75) -> (-1, 61.75)
  line L4 (10, 61.75) -> (5, 61.75)
  line L5 (9, 50.75) -> (5, 50.75) projected
  line L6 (0, 0) -> (0, 82.75) projected
  line L7 (9, 52.75) -> (0, 52.75)
  line L8 (0, 52.75) -> (0, 61.75)
  line L9 (0, 61.75) -> (9, 61.75)
  line L10 (9, 61.75) -> (9, 50.75)
  line L11 (9, 26.1825) -> (0, 26.1825) projected
  line L12 (0, 31.2497) -> (9, 31.2497)
  line L13 (9, 31.2497) -> (9, 26.1825)
  line L14 (9, 26.1825) -> (0, 26.1825)
  line L15 (0, 26.1825) -> (0, 31.2497)
  line L16 (9, 26.1825) -> (0, 31.2497)
  line L17 (0, 26.1825) -> (9, 31.2497)
  line L18 (10, 51.75) -> (0, 61.75)
  line L19 (0, 52.75) -> (9, 61.75)
  point P0 (4.5, -5.75)
  point P1 (4.5, 28.7161)
  point P2 (4.5, 57.25)
hole "Hole4" at (0, 34.4661, 33.5) at (0, 63, 33.5) direction (0, 0, -1) diameter 4 depth 6 counterbore diameter 4.6 counterbore depth 1.5
equation "\"d9\" = d10"
properties part number "middle_gear_holder" material "Nylon 6/6"
